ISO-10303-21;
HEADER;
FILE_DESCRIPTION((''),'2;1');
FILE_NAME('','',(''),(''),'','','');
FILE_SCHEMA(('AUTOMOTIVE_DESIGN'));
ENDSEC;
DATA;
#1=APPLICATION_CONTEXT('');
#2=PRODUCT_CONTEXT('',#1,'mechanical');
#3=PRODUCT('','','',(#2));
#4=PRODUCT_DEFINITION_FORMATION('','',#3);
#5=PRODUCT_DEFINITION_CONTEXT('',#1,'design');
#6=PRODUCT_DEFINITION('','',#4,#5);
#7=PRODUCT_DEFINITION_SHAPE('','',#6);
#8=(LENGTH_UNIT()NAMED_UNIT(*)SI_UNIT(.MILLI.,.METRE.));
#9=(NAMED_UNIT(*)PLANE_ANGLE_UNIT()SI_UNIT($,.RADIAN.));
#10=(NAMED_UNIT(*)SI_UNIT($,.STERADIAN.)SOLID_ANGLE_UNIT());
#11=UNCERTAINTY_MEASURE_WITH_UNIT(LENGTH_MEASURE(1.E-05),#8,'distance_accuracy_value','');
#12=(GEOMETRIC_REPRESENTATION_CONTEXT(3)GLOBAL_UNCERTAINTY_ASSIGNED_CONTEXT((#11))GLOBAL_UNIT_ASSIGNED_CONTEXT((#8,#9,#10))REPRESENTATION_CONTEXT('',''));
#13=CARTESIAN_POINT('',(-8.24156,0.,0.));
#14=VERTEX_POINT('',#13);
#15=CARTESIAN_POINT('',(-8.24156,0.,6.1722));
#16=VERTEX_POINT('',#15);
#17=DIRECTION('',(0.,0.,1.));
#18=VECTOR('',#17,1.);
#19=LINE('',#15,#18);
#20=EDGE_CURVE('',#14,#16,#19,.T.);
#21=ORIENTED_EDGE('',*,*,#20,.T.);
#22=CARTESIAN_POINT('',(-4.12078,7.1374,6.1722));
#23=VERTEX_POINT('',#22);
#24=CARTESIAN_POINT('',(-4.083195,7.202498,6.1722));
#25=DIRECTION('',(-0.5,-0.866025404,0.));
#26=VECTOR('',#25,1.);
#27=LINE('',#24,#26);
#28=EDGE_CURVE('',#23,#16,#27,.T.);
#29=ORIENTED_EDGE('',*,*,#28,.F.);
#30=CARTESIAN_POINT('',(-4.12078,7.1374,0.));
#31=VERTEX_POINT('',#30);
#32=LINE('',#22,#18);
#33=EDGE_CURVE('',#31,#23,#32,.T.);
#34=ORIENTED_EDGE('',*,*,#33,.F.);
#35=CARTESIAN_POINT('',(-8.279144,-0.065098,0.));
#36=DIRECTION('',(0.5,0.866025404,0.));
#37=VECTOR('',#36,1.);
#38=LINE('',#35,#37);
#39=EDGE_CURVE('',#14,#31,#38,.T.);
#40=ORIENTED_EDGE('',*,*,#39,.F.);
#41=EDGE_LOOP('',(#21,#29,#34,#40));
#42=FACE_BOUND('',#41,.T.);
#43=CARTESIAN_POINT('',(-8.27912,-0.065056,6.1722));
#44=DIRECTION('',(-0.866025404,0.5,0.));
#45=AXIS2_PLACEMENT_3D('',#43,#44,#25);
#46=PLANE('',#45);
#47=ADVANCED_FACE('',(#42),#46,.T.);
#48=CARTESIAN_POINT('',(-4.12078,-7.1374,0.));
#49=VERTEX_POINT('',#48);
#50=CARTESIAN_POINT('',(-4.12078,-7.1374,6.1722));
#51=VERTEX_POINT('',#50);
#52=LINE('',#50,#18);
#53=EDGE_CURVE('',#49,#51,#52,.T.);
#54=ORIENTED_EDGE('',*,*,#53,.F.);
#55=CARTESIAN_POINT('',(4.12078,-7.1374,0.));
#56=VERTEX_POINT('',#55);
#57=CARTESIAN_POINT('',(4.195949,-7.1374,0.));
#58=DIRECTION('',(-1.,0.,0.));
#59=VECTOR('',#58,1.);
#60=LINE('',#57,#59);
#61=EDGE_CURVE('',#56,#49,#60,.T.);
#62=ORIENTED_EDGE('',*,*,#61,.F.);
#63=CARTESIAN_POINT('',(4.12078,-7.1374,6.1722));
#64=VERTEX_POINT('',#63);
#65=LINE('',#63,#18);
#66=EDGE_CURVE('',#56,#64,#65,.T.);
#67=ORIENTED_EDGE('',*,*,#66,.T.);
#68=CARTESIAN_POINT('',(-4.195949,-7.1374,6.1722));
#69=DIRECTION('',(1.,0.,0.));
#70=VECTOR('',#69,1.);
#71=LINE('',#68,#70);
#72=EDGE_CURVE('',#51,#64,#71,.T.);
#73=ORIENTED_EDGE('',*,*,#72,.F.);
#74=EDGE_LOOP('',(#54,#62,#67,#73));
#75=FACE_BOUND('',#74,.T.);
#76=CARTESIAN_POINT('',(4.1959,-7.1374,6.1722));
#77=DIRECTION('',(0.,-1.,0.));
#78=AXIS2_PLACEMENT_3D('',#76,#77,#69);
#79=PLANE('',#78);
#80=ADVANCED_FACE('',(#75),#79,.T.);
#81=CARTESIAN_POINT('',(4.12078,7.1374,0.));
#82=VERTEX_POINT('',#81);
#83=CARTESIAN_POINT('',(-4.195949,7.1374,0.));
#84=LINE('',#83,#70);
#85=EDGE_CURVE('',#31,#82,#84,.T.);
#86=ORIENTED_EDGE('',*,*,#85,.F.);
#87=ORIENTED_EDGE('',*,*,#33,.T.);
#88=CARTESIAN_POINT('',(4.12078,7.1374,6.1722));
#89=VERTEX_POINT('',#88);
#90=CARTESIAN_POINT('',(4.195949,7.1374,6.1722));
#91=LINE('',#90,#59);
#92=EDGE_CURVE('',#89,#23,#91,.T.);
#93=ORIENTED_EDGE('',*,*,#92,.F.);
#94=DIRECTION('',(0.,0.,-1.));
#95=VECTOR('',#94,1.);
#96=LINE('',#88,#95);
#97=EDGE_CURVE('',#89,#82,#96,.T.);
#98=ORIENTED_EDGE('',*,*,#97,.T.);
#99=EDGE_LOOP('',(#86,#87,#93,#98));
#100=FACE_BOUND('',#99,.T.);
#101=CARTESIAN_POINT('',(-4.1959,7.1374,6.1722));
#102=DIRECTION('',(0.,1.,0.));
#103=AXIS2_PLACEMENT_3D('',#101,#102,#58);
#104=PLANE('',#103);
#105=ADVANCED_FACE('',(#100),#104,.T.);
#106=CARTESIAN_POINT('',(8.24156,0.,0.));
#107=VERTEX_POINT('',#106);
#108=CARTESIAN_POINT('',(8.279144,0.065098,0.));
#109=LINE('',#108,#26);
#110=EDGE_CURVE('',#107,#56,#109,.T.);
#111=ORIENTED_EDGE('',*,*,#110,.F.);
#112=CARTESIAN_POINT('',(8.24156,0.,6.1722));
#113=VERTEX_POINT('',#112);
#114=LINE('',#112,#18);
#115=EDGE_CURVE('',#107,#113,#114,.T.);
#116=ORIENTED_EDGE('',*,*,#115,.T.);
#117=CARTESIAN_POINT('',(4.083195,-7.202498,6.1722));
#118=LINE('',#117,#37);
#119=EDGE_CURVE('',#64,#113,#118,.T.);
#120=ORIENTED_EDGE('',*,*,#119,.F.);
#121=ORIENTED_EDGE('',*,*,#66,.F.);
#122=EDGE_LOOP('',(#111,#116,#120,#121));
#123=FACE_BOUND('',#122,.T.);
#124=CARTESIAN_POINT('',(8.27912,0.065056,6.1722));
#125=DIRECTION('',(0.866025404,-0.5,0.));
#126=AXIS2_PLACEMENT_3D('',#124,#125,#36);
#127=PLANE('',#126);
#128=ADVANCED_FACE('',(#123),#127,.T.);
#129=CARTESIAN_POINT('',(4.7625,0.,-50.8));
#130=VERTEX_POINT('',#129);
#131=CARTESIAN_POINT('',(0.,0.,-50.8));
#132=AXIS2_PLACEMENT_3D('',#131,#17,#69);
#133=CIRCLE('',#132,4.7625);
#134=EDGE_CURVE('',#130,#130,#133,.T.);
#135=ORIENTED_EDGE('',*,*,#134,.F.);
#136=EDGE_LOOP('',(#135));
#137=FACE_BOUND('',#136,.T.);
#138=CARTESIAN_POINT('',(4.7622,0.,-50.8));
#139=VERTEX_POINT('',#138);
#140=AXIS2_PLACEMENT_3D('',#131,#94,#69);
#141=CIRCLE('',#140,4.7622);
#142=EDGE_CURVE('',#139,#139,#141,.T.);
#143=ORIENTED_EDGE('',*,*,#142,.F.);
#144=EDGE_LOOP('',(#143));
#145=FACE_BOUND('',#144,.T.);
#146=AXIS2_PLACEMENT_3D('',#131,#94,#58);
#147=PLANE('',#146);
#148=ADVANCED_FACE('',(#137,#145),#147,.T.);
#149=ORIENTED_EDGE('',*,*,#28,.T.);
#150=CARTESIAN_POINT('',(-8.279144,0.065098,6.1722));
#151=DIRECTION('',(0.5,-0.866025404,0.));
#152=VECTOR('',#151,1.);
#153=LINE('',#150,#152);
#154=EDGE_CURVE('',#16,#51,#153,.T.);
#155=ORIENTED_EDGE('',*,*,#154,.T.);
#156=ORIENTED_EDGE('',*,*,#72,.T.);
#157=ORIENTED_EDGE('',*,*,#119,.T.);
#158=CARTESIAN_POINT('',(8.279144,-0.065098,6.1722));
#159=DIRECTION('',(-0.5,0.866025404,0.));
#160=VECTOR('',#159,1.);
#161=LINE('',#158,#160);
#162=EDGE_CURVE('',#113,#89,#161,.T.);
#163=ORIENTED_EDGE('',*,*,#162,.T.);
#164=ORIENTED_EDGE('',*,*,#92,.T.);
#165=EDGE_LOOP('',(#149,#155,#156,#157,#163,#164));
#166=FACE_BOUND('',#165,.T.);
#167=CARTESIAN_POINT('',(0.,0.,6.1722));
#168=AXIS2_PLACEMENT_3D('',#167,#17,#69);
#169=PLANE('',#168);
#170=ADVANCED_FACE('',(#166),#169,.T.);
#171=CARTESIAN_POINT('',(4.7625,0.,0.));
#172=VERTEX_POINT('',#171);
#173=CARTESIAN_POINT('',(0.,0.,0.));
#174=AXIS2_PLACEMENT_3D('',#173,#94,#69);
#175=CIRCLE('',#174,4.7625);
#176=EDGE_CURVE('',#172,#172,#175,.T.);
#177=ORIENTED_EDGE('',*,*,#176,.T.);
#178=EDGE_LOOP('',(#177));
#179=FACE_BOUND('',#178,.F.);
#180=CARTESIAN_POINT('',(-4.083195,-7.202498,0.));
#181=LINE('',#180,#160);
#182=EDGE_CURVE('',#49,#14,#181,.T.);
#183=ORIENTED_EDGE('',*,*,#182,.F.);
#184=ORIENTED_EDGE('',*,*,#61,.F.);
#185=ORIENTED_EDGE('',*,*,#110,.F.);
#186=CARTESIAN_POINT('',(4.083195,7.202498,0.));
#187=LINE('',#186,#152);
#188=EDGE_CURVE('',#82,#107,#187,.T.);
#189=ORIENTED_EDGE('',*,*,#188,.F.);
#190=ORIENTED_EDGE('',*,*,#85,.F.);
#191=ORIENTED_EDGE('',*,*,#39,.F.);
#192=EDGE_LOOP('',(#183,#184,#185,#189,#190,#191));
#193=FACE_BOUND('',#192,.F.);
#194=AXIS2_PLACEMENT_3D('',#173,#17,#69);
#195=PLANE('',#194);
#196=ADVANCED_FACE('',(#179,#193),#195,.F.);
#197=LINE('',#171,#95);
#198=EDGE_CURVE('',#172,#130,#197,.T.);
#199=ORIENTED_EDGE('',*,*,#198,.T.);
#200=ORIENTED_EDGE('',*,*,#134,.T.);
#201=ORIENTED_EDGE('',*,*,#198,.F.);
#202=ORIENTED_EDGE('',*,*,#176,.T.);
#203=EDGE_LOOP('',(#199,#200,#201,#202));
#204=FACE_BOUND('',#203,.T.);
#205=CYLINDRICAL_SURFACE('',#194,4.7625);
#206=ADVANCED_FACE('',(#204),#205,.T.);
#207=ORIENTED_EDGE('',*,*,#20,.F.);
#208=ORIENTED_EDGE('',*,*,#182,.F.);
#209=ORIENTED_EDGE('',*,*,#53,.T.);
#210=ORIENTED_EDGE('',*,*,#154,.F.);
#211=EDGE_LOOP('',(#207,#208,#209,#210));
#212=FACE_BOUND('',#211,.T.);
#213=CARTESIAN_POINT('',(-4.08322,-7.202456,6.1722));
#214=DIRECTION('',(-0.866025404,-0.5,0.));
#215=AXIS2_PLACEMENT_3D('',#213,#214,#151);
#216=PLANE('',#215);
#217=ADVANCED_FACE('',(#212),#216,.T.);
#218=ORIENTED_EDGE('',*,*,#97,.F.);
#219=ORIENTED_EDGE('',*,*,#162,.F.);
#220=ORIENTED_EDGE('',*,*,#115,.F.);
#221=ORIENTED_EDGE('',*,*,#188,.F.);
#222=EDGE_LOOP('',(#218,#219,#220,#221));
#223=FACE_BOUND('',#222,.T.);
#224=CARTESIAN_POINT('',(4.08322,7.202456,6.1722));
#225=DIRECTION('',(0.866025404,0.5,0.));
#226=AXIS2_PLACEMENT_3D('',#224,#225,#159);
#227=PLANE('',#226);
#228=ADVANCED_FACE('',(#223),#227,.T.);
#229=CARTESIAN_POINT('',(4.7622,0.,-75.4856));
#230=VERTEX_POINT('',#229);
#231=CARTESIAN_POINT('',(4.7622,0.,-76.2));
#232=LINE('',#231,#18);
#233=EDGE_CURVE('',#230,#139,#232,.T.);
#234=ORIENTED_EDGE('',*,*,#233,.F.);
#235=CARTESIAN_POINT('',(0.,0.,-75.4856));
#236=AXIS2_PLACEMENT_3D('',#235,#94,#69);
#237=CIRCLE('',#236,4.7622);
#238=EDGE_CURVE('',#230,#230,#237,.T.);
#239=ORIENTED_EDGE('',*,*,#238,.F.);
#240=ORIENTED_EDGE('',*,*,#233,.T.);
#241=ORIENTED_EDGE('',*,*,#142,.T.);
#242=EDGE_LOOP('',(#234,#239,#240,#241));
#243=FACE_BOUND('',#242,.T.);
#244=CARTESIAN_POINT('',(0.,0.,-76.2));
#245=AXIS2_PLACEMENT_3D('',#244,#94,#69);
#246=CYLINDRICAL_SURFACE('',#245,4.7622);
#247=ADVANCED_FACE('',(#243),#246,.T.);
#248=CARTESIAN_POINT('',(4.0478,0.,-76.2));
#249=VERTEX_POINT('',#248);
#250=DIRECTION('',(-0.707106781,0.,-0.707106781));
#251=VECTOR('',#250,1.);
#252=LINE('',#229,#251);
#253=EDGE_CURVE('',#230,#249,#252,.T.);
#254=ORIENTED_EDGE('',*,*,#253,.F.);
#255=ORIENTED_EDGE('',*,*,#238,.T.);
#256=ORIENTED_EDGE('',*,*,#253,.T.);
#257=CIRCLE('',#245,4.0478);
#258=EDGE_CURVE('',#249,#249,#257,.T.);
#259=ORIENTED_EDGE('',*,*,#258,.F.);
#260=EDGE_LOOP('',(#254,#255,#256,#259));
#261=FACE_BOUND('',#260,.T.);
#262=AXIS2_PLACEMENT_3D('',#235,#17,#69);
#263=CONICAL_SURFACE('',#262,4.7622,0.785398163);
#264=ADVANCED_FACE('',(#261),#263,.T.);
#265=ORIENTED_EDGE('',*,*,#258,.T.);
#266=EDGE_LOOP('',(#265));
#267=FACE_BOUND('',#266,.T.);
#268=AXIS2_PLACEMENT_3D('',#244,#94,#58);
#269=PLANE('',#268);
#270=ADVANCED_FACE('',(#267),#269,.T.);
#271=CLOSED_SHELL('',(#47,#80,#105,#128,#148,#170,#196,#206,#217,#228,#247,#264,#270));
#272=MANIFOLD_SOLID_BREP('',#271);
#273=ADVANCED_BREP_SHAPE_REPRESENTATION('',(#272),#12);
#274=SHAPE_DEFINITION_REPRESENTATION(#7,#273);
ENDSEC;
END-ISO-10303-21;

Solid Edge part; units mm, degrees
sketch "Sketch1" plane through (0, 0, 0) normal (0, 0, 1) x (1, 0, 0)
  circle A0 centre (0, 0) radius 8.2794
  dimension "D1" = 16.5588
extrude "Protrusion1" add sketch "Sketch1" along normal blind 6.1722
sketch "Sketch2" plane through (0, 0, 0) normal (0, 0, -1) x (1, 0, 0)
  circle A0 centre (0, 0) radius 4.7625
extrude "Protrusion2" add sketch "Sketch2" along normal blind 76.2
sketch "Sketch3" plane through (0, 0, -76.2) normal (0, 0, -1) x (1, 0, 0)
  circle A0 centre (0, 0) radius 4.7622
extrude "Cutout1" cut sketch "Sketch3" against normal blind 25.4 flip side to cut
chamfer "Chamfer_1" distance 0.7144 angle 45 1 edges at (-4.7622, 0, -76.2)
sketch "Sketch4" plane through (0, 0, 6.1722) normal (0, 0, 1) x (1, 0, 0)
  line L0 (-4.1959, 7.1374) -> (4.1959, 7.1374)
  dimension "D1" = 14.2748
extrude "Cutout2" cut sketch "Sketch4" against normal up to next material side at (0, 7.1874, 6.1722)
pattern_circular "Pattern1" count 6 over 360 about axis through (0, 0, 6.1722) along (0, 0, 1) of "Cutout2"
properties part number "125064"
